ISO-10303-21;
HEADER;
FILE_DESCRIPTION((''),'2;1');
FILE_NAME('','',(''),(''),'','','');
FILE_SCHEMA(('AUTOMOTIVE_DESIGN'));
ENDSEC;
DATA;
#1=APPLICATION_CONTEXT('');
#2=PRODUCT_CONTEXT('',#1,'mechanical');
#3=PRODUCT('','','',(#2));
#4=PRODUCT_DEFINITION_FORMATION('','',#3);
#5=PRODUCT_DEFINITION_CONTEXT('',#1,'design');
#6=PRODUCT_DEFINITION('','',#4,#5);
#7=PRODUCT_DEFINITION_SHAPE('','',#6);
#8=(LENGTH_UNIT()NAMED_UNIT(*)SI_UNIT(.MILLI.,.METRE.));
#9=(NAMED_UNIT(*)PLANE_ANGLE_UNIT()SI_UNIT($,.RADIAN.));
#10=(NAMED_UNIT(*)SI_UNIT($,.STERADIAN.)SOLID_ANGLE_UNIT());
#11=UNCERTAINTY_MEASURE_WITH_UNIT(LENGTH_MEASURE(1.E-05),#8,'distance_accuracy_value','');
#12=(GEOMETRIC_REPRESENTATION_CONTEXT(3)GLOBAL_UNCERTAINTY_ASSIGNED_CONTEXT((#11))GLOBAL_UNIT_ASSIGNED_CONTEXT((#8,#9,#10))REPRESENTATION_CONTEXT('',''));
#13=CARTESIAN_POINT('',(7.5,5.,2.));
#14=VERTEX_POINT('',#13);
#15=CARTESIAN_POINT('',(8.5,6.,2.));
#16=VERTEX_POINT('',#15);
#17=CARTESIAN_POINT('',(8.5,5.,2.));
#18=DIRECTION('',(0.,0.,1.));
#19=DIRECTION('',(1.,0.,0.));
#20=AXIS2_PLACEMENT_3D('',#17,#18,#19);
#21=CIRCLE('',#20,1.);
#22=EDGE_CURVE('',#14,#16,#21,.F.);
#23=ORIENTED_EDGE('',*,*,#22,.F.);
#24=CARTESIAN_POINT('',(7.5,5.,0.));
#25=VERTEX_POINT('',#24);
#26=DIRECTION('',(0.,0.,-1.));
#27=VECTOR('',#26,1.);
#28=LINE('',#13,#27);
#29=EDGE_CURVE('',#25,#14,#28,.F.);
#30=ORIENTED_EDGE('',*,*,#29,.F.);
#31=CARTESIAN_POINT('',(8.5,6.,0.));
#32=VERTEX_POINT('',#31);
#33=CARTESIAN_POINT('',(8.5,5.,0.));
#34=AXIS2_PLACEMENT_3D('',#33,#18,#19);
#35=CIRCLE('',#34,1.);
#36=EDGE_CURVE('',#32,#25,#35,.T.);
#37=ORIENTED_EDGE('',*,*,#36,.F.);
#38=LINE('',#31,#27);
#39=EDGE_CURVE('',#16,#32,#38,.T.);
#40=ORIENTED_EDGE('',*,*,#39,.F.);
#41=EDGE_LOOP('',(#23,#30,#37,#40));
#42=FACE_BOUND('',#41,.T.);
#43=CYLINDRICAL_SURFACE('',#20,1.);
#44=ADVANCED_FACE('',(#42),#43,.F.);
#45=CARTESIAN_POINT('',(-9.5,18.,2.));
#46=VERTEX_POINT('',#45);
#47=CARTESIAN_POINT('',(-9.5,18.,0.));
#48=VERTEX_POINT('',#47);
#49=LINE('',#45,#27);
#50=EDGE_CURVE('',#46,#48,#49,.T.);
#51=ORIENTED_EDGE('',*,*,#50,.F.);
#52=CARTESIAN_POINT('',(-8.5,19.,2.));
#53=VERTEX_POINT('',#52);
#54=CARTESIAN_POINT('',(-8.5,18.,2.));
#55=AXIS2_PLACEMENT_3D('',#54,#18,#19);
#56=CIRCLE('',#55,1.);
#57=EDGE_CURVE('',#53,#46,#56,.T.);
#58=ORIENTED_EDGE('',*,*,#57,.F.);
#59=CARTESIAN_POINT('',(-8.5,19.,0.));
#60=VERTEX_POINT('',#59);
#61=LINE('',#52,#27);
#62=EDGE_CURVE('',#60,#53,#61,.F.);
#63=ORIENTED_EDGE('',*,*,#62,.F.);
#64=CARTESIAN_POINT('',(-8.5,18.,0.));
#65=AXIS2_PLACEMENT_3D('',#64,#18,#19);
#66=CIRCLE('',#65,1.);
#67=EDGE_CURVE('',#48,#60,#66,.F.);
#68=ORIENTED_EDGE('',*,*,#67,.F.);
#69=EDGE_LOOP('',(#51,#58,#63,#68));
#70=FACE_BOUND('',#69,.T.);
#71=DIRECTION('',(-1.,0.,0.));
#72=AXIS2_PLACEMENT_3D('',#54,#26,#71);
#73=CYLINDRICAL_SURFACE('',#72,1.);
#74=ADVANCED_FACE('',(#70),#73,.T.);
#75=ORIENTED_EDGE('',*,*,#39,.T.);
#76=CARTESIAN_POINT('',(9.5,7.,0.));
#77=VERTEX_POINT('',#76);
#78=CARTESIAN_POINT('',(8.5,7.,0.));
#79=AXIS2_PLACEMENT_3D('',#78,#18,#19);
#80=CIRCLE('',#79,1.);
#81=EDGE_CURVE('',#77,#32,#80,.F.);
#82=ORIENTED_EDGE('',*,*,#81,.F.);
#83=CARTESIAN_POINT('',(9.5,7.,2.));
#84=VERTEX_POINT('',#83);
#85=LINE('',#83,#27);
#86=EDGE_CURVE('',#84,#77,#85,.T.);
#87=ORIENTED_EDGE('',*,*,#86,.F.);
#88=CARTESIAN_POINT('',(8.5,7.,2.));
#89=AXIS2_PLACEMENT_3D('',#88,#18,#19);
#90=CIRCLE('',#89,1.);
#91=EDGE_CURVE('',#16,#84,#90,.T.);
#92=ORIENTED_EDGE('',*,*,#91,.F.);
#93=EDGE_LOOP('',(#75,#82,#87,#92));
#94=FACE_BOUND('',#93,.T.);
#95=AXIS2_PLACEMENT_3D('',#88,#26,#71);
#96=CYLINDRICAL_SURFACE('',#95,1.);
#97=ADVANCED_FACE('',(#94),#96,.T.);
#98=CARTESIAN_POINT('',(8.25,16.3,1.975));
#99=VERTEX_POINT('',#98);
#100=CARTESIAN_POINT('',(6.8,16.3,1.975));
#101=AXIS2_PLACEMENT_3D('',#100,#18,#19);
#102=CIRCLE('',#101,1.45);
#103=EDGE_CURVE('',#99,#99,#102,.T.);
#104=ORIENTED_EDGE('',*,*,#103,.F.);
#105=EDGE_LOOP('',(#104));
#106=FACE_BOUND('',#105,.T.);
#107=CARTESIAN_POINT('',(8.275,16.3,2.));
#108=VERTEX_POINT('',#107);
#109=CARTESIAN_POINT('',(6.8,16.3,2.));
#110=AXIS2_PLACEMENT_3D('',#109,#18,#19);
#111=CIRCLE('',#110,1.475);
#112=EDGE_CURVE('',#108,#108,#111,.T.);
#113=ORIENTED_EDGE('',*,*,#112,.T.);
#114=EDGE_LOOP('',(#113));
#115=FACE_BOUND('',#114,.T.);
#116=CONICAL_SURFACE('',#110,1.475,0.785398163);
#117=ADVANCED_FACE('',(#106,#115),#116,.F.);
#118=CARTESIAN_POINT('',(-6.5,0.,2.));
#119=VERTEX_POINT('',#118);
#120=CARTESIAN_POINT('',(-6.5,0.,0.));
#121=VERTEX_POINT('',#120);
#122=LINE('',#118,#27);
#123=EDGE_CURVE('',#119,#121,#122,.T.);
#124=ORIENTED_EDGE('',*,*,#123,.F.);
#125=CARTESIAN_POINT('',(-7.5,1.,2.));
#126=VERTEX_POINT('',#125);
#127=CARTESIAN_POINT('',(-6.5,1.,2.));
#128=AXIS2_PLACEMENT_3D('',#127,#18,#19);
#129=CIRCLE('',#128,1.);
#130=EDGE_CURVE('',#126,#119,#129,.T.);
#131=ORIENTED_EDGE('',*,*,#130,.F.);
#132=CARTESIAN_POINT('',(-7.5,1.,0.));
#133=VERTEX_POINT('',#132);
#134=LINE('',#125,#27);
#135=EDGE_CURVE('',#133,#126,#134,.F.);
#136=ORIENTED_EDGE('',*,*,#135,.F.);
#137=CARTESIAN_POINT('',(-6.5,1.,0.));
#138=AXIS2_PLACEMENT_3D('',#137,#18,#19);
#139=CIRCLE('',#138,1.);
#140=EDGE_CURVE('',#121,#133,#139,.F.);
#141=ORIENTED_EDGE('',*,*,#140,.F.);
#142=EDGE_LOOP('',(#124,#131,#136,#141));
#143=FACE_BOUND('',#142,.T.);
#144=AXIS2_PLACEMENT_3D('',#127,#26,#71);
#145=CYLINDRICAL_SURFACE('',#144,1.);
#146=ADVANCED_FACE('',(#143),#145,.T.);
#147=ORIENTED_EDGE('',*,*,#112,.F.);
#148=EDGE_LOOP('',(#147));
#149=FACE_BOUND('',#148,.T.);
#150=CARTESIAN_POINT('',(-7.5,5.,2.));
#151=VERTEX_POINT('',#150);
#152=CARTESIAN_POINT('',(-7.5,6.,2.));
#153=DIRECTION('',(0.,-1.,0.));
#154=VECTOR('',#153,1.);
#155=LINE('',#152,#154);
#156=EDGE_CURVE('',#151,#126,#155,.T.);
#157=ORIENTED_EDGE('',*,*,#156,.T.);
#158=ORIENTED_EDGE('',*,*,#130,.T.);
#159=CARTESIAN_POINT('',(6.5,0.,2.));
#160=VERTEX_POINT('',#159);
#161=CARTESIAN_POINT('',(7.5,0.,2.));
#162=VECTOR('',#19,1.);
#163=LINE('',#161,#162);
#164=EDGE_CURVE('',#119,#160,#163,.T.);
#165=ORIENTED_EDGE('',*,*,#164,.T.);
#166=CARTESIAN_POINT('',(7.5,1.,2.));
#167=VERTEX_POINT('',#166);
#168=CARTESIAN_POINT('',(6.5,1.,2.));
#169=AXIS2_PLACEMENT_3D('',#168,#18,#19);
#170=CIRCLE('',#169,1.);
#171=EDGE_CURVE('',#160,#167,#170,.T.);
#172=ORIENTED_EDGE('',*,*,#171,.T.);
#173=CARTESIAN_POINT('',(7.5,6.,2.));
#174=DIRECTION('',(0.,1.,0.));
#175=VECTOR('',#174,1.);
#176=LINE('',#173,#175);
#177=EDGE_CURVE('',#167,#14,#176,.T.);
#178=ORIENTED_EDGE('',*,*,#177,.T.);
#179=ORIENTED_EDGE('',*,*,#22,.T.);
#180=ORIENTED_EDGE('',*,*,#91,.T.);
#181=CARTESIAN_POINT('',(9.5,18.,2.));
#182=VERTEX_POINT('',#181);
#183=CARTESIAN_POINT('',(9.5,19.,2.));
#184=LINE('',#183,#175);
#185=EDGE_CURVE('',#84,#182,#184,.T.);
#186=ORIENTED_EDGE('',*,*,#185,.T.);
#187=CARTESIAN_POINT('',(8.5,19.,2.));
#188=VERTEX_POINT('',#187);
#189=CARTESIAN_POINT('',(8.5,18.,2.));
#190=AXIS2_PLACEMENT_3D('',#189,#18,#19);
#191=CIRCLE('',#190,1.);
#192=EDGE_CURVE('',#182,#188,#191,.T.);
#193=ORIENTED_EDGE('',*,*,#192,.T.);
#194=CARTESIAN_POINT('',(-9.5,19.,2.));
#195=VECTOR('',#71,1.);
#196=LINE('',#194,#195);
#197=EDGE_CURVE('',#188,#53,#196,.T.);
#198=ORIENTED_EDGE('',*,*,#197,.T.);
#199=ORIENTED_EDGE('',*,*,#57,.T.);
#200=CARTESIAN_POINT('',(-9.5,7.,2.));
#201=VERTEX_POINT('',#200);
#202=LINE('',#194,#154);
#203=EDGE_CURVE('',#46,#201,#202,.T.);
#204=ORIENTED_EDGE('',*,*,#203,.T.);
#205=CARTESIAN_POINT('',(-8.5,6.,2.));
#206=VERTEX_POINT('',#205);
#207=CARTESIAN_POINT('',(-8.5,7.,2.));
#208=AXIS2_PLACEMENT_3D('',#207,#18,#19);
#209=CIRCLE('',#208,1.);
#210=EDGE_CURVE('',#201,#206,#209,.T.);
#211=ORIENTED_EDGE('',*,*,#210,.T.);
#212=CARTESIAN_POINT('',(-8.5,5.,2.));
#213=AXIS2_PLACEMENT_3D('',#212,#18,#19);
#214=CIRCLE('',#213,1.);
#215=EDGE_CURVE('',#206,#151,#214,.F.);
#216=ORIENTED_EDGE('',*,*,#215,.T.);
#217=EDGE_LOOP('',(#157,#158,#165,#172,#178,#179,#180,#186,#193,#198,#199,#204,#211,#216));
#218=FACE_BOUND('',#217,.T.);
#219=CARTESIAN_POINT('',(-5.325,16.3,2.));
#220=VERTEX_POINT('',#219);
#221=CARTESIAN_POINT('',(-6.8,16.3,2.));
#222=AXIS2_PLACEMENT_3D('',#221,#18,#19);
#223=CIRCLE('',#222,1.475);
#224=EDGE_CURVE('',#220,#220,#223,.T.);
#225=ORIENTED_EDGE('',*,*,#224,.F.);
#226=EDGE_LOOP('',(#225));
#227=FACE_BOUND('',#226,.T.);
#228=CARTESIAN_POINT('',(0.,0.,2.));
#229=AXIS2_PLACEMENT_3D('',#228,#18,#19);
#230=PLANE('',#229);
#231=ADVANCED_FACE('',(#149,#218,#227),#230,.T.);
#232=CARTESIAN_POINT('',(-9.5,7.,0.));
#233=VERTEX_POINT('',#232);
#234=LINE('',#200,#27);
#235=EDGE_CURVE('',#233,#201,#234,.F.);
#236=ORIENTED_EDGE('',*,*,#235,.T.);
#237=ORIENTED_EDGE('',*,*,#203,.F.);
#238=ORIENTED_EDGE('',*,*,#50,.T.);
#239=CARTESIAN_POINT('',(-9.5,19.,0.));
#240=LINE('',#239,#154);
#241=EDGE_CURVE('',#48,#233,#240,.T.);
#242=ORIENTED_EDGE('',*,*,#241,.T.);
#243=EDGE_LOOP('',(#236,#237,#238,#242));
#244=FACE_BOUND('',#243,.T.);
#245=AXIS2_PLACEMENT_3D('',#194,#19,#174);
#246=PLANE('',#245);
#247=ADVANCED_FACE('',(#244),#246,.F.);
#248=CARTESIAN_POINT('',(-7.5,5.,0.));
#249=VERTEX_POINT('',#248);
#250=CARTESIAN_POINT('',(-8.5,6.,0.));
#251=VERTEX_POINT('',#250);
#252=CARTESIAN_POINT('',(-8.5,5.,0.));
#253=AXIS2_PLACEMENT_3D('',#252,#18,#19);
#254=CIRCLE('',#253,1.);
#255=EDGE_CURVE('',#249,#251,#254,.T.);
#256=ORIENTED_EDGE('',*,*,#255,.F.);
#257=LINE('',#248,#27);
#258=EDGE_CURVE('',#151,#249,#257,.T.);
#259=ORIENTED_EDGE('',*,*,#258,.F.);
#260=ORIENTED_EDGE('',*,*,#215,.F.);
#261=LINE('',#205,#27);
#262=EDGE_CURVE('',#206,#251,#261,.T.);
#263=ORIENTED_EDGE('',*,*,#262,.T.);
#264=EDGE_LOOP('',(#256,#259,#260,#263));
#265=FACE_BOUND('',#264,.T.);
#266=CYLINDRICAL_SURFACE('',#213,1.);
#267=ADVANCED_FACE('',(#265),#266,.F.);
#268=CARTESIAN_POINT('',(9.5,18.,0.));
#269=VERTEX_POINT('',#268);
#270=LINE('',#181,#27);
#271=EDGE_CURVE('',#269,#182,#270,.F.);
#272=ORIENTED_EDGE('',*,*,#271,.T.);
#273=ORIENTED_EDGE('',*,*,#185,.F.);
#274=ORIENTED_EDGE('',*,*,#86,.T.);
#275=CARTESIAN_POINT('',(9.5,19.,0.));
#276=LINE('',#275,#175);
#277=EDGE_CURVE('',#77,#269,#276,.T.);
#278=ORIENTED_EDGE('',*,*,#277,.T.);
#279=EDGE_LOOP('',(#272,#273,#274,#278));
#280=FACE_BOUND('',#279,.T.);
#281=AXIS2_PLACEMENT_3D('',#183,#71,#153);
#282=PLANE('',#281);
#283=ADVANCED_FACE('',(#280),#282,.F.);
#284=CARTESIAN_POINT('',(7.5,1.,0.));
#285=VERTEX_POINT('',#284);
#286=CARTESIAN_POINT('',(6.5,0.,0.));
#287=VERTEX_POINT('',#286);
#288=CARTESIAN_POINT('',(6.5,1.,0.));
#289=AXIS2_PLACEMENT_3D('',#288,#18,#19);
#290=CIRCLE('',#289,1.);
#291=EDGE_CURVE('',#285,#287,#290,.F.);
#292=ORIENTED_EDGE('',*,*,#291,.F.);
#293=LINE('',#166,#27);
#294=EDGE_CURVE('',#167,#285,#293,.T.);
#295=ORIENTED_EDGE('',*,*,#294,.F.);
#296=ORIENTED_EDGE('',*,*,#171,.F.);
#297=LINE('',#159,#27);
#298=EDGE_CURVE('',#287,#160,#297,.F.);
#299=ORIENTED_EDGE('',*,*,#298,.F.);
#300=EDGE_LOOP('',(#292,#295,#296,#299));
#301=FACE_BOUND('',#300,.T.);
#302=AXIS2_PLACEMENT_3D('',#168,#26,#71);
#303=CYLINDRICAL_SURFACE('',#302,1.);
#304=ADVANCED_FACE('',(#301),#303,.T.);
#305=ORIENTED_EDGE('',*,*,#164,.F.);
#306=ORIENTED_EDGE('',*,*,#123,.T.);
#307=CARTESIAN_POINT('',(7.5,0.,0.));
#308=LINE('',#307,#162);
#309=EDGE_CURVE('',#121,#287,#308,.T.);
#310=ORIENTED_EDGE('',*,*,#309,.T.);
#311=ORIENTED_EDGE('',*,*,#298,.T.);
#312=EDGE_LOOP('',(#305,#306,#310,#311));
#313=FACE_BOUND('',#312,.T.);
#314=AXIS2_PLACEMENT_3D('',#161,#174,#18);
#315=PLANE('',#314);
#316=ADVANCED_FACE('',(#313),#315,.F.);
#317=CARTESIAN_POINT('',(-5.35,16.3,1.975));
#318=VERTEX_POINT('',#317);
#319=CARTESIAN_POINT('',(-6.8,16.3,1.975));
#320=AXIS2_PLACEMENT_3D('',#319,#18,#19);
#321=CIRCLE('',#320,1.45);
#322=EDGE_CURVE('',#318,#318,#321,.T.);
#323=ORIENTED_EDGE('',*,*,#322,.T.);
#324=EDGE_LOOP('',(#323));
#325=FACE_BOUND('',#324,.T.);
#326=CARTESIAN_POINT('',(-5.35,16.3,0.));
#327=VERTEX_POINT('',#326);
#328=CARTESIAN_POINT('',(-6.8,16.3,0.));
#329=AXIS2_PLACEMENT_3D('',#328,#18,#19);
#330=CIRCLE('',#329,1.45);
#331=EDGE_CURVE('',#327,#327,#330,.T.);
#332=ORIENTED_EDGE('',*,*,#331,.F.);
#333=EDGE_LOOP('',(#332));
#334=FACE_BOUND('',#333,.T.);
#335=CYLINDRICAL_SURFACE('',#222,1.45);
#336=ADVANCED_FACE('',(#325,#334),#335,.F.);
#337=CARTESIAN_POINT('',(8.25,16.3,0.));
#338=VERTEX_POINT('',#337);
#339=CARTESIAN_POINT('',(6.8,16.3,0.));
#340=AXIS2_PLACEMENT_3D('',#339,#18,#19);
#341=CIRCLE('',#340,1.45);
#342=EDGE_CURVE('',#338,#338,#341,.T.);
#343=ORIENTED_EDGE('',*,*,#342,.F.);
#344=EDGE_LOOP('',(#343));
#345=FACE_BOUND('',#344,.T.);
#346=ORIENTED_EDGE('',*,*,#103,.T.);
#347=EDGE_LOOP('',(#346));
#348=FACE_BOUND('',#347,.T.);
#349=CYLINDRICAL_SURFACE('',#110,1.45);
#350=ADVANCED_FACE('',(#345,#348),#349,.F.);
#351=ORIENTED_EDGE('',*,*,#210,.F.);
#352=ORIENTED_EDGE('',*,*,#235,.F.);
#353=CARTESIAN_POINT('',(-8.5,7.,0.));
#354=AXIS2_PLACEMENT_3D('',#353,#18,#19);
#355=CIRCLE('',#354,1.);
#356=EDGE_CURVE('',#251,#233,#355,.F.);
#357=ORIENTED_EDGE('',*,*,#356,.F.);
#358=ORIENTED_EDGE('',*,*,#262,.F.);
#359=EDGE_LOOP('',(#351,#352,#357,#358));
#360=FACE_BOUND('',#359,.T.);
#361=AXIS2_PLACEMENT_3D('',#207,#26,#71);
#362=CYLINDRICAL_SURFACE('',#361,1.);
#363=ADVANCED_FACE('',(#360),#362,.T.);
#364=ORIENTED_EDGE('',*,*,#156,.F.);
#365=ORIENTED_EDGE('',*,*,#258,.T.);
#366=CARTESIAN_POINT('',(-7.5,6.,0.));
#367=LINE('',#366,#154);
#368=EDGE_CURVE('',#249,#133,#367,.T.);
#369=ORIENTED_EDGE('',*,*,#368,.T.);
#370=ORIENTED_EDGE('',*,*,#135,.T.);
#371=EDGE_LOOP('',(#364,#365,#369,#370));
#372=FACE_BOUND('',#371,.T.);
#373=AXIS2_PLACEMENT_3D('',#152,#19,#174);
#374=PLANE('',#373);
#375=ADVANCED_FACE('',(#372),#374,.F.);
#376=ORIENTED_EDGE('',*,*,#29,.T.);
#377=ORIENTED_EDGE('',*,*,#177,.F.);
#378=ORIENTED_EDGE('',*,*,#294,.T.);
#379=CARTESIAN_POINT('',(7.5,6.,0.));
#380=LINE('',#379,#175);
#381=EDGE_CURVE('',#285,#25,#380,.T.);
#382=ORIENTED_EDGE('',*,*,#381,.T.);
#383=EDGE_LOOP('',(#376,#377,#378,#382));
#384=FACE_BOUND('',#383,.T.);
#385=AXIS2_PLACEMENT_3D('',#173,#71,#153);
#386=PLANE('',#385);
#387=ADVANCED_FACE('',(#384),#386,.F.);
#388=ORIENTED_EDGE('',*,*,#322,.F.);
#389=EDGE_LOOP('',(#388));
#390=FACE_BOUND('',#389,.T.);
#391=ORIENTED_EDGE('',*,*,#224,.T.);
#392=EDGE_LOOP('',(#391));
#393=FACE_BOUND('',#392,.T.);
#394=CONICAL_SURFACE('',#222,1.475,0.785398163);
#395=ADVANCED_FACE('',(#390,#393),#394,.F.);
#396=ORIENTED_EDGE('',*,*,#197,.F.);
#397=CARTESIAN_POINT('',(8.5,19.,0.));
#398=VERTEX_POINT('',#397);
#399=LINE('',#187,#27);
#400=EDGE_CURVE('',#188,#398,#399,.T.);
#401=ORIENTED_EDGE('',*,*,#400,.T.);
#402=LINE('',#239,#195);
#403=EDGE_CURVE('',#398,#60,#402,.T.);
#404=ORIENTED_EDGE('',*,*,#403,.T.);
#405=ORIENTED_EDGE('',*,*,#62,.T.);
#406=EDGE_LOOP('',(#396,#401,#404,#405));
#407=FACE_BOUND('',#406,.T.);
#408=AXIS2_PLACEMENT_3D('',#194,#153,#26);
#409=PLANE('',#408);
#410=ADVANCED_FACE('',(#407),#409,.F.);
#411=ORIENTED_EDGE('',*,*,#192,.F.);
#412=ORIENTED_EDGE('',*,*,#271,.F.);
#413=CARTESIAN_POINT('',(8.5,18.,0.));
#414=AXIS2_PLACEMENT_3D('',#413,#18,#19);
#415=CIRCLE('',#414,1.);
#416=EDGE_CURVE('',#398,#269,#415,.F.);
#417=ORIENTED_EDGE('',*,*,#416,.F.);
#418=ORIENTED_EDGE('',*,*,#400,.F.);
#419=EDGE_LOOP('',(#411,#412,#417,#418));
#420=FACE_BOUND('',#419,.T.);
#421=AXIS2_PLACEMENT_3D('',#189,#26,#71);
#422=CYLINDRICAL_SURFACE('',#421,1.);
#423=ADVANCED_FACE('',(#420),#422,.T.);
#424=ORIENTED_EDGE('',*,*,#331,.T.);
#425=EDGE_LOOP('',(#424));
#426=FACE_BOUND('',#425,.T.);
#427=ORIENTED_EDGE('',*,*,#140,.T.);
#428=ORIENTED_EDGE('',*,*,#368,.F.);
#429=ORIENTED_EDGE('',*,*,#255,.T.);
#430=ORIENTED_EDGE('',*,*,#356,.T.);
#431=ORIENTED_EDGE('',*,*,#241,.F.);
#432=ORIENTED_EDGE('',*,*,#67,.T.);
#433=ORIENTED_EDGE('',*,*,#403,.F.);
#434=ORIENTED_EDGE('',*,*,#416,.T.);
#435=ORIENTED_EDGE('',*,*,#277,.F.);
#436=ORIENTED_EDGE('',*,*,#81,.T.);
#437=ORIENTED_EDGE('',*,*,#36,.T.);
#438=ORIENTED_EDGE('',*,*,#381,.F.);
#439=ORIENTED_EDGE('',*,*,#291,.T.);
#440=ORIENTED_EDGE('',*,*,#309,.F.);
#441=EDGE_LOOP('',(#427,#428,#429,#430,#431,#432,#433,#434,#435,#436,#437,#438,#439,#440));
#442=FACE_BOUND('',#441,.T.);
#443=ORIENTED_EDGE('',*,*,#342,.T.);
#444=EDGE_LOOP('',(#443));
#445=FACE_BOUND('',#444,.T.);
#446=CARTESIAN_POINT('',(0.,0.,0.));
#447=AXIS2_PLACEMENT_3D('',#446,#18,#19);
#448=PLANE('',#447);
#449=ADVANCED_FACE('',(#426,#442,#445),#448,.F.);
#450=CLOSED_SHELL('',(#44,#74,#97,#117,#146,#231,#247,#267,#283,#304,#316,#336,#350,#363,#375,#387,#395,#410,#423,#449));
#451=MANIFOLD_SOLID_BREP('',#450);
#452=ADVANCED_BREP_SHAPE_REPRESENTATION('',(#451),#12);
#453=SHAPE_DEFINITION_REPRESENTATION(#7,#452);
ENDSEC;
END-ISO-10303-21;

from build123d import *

# Parameters (mm, degrees)
BOSS_EXTRU_1_DEPTH           = 2
CONG_3_R                     = 1
D_GAGEMENT_M2_51_D           = 2.9
D_GAGEMENT_M2_51_CSINK_D     = 2.95
D_GAGEMENT_M2_51_CSINK_ANGLE = 90


with BuildPart() as part:
    # Esquisse1 → Boss.-Extru.1 (new body)
    with BuildSketch(Plane.XY):
        Polygon((-9.5, 19), (9.5, 19), (9.5, 6), (7.5, 6), (7.5, 0), (-7.5, 0), (-7.5, 6), (-9.5, 6), align=None)
    extrude(amount=BOSS_EXTRU_1_DEPTH)

    # Congé3
    cong_3_edges = [part.edges().sort_by_distance(p)[0] for p in [
        (9.5, 19, 1),
        (9.5, 6, 1),
        (7.5, 6, 1),
        (7.5, 0, 1),
        (-7.5, 0, 1),
        (-7.5, 6, 1),
        (-9.5, 6, 1),
        (-9.5, 19, 1),
    ]]
    fillet(cong_3_edges, radius=CONG_3_R - 0.0001)  # a hair under: the kernel refuses the full size

    # Dégagement M2.51 (through all)
    with Locations(Plane(origin=(-6.8, 16.3, 2), x_dir=(1, 0, 0), z_dir=(0, 0, 1))):
        with Locations((0, 0), (13.6, 0)):
            CounterSinkHole(D_GAGEMENT_M2_51_D / 2, D_GAGEMENT_M2_51_CSINK_D / 2, counter_sink_angle=D_GAGEMENT_M2_51_CSINK_ANGLE)


solid = part.part
